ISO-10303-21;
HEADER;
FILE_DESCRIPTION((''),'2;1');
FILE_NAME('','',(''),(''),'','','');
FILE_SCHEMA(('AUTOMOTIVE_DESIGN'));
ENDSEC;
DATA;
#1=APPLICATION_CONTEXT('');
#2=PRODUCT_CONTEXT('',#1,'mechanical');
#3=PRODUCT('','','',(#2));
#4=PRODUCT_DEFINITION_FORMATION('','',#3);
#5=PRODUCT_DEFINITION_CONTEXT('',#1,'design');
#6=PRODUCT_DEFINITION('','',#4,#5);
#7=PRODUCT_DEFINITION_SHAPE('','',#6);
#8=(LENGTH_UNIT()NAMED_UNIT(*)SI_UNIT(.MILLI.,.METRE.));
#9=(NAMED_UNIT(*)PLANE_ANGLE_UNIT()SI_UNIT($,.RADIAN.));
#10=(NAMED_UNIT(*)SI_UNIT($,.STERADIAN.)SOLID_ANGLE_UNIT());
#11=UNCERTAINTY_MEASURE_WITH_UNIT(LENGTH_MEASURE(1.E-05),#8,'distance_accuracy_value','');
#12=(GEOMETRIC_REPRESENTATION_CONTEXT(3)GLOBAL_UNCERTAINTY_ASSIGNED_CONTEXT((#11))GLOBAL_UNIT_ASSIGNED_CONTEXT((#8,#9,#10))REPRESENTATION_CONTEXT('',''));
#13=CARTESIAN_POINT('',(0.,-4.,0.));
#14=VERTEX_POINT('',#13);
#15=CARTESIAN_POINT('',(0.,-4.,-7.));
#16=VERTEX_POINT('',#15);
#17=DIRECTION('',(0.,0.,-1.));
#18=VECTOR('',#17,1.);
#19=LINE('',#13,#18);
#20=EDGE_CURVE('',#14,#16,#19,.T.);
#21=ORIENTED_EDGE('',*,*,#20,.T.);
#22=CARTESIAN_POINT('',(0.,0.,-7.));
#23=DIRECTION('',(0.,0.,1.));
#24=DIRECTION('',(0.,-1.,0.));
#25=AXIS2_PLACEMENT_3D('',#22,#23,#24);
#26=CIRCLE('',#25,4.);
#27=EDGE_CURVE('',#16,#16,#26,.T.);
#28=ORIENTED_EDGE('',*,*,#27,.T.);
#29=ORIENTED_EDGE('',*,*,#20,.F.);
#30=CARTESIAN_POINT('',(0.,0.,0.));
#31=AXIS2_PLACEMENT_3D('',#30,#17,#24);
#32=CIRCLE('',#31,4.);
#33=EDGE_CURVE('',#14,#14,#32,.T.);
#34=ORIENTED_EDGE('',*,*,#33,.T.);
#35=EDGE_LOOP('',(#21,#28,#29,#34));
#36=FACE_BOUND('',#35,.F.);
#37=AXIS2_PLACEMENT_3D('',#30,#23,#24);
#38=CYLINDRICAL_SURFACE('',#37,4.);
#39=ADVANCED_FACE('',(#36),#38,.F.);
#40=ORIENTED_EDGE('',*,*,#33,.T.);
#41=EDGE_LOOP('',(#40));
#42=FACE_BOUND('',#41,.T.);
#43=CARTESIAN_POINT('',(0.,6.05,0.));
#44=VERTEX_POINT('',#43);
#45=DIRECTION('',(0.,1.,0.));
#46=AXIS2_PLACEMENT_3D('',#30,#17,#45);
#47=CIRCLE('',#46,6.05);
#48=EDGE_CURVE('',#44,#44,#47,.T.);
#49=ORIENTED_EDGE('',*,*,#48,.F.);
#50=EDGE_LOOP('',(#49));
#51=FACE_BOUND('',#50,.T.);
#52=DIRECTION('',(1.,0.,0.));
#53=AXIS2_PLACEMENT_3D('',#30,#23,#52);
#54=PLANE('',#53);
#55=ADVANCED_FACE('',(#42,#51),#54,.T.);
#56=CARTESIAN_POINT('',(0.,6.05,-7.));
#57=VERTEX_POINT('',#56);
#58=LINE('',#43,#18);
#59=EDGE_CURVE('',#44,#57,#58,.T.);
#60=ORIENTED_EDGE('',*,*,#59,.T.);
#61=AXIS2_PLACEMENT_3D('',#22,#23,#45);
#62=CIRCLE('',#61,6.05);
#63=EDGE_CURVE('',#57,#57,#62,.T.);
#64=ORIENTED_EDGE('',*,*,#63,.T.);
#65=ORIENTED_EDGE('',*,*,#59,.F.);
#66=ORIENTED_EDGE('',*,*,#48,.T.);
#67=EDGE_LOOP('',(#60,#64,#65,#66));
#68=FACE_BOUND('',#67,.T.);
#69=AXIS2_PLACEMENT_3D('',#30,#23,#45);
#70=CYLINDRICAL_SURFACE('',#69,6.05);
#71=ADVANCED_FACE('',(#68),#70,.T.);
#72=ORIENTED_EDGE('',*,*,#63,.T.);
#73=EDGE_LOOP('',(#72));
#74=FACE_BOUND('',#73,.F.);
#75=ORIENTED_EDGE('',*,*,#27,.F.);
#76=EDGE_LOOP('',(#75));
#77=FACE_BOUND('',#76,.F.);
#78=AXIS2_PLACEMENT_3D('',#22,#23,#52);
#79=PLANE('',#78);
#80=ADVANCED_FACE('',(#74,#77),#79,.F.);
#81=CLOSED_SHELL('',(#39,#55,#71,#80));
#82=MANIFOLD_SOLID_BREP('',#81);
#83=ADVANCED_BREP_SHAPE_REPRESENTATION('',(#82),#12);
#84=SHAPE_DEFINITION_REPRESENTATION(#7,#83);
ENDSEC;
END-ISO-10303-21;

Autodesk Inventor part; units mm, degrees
ref_plane "YZ Plane" through (0, 0, 0) normal (1, 0, 0) x (0, 1, 0)
ref_plane "XZ Plane" through (0, 0, 0) normal (0, 1, 0) x (-1, 0, 0)
ref_plane "XY Plane" through (0, 0, 0) normal (0, 0, 1) x (1, 0, 0)
sketch "Sketch1" plane through (0, 0, 0) normal (0, 0, 1) x (1, 0, 0)
  circle A0 centre (0, 0) radius 4
  circle A1 centre (0, 0) radius 6.05
  line L0 (0, -4) -> (0, -6.05)
  line L1 (4, 0) -> (6.05, 0) construction
  line L2 (0, 4) -> (0, 6.05)
  dimension "d0" = 8
  dimension "d1" = 12.1
  dimension "d2" = 90
  dimension "d3" = 90
  dimension "d4" = 4
  dimension "d5" = 4
sketch "Sketch1 outline for Extrusion1" plane through (0, 0, 0) normal (0, 0, 1) x (1, 0, 0)
  line L0 (0, -6.05) -> (0, -4)
  arc A0 (0, 6.05) -> (0, -6.05) centre (0, 0) ccw
  line L1 (0, 4) -> (0, 6.05)
  arc A1 (0, -4) -> (0, 4) centre (0, 0) cw
extrude "Extrusion1" add sketch "Sketch1 outline for Extrusion1" against normal blind 7
ref_plane "Work Plane1" through (0, 4, 0) normal (-1, 0, 0) x (0, 1, 0)
mirror "Mirror1" about plane through (0, 6.05, 0) normal (1, 0, 0) of "Extrusion1"
sketch "Sketch3" plane through (0, 4, 0) normal (-1, 0, 0) x (0, 1, 0)
  line L0 (2.05, 0) -> (2.05, 7)
  arc A0 (2.05, 6.230644) -> (2.05, 0.769356) centre (4.930028, 3.5) ccw
  line L1 (0.961278, 3.5) -> (0.961278, 0) construction
  line L2 (-10.05, 0) -> (2.05, 0) construction
  line L3 (0.961278, 3.5) -> (0.961278, 7) construction
  line L4 (-10.05, 7) -> (2.05, 7) construction
  line L5 (2.05, 0.769356) -> (2.05, 6.230644) construction
  point P0 (-4, 0)
  dimension "d8" = 3.96875
properties part number "Bearing 608 Inner Race"
